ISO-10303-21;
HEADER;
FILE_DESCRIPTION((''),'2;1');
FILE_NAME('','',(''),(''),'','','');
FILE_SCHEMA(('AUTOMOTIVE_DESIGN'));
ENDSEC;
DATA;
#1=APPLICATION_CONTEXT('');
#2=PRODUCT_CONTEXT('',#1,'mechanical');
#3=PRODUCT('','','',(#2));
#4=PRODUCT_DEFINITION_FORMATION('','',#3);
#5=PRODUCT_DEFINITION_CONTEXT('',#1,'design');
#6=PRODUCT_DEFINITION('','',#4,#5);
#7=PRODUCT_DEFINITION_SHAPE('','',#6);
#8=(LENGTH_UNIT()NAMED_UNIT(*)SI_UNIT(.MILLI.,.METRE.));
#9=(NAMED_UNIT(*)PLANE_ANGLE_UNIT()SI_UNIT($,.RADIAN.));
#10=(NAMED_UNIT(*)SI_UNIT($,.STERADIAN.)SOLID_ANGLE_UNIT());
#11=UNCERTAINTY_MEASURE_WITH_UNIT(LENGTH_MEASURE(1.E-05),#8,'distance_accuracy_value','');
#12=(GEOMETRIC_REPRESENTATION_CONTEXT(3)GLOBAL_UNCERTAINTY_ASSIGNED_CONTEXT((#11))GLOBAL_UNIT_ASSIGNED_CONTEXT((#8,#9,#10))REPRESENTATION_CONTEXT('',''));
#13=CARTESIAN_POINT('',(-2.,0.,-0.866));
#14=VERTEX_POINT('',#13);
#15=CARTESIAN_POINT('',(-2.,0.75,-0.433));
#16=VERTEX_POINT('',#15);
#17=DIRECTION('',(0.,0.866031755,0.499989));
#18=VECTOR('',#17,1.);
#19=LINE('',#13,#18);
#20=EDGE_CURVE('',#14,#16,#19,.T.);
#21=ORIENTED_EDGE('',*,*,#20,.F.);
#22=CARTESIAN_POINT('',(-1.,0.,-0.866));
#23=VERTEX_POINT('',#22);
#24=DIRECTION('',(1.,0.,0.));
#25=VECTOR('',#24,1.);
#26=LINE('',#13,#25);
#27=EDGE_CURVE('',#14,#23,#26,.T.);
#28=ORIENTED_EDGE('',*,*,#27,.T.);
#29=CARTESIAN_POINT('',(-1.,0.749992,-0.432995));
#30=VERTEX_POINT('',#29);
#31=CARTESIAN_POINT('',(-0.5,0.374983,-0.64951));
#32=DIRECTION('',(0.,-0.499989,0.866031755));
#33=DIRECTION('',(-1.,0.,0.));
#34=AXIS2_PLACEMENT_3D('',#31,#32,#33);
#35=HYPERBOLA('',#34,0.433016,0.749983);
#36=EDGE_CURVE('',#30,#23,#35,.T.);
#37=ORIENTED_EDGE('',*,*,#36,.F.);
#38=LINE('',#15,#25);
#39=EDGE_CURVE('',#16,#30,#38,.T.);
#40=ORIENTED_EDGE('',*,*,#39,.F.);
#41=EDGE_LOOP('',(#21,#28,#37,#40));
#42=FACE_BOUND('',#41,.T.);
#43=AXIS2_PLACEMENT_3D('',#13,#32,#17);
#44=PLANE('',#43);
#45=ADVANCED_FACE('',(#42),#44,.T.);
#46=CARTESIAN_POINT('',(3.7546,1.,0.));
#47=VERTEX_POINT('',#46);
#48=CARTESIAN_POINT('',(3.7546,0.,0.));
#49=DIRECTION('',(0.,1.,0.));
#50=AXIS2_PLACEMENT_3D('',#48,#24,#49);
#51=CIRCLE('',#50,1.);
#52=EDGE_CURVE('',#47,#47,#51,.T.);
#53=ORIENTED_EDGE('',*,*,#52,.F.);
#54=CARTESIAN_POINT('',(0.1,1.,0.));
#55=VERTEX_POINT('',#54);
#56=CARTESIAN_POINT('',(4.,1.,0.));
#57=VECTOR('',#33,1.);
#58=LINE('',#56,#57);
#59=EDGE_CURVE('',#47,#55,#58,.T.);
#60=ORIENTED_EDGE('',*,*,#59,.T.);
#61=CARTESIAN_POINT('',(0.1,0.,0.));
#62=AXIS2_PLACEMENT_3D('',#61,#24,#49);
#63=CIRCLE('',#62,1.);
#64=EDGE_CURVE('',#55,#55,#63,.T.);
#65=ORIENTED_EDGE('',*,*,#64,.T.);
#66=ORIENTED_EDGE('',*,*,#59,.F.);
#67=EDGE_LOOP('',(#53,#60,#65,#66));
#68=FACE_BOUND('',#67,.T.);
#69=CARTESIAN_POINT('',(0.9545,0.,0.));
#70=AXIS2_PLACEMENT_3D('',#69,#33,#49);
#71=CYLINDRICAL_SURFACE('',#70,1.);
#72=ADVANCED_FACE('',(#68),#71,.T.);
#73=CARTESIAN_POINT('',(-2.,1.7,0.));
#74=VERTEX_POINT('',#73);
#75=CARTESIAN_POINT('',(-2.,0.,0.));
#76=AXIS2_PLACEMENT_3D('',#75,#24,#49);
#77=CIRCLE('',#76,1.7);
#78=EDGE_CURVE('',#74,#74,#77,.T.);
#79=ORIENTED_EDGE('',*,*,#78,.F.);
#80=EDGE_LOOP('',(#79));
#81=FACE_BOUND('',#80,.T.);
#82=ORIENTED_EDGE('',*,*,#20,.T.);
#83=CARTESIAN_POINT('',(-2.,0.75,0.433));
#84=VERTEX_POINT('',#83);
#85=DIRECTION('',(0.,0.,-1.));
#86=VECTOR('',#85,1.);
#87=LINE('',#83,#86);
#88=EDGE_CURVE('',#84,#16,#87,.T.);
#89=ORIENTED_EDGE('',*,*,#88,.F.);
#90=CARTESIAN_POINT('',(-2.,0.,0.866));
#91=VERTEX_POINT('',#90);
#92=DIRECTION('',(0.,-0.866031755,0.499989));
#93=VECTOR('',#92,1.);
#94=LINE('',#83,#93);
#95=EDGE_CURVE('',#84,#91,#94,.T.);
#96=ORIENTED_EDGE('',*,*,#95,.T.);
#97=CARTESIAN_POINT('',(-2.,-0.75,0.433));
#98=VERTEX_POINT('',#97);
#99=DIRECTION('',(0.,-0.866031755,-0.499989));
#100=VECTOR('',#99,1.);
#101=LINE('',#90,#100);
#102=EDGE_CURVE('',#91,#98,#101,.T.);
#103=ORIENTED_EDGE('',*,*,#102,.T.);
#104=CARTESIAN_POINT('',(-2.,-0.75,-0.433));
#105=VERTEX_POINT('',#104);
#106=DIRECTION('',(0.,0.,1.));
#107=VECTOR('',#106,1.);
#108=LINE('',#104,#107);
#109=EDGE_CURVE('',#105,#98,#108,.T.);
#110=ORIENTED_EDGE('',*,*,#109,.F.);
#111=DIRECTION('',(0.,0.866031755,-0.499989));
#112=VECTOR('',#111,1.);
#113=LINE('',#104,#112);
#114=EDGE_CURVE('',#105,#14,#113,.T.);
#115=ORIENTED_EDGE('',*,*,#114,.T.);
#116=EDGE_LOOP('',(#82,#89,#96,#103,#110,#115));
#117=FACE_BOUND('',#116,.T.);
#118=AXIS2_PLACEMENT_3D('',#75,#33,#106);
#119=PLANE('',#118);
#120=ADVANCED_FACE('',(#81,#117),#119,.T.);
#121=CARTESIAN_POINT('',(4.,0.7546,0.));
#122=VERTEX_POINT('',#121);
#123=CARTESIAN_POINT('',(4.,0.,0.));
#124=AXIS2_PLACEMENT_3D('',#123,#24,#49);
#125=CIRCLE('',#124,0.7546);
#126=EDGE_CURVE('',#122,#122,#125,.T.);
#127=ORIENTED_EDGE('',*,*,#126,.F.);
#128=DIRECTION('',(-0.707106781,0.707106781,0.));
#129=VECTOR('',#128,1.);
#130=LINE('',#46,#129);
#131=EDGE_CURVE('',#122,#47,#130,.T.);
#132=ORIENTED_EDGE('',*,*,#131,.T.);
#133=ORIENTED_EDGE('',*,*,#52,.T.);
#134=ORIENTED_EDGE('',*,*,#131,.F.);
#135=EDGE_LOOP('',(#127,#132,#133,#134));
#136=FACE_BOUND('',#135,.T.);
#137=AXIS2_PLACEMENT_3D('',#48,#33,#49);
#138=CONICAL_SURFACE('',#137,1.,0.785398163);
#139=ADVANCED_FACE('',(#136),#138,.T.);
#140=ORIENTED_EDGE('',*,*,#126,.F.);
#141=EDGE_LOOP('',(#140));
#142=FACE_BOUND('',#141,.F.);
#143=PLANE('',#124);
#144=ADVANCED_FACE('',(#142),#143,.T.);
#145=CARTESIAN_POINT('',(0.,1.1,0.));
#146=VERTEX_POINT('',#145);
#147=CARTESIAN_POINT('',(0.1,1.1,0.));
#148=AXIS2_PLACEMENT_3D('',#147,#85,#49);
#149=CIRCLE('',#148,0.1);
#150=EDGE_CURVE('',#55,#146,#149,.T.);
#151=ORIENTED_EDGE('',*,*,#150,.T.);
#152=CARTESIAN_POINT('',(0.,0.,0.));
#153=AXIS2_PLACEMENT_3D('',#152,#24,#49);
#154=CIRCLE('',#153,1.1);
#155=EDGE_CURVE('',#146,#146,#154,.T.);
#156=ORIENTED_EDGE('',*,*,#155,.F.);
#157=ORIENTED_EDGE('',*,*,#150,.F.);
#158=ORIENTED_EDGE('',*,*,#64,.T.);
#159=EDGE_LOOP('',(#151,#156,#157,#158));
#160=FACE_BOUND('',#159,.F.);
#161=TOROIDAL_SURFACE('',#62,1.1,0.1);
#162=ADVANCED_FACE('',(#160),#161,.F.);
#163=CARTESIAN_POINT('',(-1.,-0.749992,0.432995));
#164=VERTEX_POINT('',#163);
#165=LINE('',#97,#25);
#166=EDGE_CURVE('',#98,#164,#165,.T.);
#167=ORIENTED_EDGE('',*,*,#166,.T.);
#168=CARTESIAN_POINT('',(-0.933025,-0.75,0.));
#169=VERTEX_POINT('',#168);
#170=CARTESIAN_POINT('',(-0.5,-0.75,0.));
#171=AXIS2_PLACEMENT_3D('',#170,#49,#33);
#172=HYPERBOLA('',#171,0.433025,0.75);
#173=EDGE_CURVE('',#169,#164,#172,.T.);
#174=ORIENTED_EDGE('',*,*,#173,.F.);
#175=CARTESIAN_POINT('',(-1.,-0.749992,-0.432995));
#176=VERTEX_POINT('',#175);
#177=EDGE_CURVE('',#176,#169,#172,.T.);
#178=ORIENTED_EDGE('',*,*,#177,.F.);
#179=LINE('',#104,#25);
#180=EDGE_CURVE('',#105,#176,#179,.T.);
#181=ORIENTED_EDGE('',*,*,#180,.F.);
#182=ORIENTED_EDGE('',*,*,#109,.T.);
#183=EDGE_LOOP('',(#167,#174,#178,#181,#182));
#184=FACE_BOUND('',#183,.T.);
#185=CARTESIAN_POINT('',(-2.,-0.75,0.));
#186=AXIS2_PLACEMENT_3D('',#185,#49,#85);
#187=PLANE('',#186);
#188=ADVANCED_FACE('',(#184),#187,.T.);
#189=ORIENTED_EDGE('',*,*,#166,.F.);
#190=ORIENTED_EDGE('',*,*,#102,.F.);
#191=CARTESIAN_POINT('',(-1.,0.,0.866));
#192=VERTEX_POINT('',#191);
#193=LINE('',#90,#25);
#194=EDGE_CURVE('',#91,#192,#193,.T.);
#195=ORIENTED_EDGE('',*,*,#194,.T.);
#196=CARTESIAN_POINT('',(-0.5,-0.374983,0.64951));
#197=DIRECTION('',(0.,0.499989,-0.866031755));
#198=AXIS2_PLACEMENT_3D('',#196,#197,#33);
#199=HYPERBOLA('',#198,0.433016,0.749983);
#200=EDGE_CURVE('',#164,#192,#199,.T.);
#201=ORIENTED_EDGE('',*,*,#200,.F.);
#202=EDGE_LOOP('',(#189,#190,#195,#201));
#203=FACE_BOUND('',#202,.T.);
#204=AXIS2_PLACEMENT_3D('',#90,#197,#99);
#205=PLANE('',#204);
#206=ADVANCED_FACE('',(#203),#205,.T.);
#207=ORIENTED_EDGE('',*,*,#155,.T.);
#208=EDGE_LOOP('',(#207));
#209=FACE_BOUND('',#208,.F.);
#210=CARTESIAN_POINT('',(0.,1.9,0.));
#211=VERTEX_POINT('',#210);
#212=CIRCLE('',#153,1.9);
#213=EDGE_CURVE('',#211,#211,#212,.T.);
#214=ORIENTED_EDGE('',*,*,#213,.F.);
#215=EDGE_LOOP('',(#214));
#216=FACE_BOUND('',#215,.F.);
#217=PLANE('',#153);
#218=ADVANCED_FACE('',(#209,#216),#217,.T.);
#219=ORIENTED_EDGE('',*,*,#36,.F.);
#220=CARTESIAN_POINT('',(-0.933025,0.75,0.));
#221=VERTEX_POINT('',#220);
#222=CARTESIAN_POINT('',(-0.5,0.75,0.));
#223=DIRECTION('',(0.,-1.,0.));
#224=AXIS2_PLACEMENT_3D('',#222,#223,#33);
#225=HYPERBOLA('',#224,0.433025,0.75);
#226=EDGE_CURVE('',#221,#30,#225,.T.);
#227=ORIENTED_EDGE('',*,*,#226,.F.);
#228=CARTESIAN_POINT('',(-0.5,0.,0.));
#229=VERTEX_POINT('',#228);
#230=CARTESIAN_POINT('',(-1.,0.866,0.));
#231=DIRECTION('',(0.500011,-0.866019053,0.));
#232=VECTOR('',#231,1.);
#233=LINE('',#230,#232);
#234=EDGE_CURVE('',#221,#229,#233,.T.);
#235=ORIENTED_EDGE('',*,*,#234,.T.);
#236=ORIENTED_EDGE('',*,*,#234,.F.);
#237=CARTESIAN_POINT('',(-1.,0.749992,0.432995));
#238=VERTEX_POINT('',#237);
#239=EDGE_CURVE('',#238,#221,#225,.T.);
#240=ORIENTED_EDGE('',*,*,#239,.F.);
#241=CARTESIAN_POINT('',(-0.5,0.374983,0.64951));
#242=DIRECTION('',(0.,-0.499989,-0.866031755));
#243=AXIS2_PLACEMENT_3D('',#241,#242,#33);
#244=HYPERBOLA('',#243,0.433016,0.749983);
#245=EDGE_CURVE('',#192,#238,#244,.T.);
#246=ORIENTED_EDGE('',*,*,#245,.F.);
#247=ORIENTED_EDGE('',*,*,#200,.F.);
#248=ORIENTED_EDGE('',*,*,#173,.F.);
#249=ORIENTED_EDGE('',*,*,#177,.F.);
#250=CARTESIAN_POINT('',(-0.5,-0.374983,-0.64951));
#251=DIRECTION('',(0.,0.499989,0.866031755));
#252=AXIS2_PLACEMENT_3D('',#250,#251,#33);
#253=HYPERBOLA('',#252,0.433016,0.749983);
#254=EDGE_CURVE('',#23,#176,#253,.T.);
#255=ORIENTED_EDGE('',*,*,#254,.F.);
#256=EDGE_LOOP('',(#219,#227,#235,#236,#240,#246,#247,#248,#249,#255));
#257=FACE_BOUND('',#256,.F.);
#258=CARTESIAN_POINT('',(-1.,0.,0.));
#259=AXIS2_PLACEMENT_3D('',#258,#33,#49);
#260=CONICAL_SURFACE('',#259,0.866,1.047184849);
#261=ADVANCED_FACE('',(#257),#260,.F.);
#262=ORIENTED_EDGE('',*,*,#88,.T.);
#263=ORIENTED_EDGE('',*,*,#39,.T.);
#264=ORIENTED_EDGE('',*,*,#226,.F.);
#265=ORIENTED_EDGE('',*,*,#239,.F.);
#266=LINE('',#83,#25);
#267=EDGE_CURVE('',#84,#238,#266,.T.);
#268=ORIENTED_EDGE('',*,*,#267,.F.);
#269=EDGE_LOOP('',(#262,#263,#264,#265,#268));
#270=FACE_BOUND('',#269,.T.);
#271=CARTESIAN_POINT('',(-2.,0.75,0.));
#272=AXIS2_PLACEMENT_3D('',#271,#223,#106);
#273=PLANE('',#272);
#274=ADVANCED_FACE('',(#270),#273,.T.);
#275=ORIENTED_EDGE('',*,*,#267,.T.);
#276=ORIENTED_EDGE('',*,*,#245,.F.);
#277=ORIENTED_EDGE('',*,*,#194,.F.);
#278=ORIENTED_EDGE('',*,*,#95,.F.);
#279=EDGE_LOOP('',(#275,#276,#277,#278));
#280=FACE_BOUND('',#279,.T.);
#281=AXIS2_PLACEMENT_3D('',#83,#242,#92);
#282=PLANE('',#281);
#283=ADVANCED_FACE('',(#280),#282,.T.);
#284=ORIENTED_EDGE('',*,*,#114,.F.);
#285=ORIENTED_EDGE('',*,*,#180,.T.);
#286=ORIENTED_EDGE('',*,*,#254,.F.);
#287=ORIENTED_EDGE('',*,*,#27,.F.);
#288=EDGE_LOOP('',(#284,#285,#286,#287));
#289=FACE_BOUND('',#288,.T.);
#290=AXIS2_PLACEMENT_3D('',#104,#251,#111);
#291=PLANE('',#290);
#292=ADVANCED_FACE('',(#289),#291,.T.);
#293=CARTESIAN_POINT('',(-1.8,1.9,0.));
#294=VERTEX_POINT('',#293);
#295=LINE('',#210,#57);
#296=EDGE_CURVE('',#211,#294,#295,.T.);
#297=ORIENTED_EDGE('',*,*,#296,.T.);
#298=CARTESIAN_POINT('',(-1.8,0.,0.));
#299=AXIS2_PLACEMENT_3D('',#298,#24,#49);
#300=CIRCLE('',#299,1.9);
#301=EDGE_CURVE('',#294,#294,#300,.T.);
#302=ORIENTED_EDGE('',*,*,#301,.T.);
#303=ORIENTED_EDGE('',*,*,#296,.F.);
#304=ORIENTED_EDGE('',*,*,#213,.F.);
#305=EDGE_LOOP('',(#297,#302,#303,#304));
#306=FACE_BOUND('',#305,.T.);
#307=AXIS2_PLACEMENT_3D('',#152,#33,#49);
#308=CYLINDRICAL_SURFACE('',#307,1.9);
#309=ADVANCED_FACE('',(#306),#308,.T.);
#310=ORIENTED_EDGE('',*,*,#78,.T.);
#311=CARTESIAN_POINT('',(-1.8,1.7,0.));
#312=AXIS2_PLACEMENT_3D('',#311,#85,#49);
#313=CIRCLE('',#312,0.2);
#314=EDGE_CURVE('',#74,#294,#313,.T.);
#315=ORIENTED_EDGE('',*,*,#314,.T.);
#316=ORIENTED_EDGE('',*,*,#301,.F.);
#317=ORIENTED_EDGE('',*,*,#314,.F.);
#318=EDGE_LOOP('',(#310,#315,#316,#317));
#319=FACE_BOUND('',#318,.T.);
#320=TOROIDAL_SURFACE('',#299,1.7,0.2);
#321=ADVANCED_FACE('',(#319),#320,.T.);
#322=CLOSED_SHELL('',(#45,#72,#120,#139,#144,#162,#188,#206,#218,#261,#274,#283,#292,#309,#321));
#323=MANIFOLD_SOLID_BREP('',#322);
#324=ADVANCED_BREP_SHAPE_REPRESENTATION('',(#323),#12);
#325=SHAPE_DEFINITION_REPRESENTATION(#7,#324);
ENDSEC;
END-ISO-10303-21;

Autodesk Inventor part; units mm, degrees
ref_plane "YZ Plane" through (0, 0, 0) normal (1, 0, 0) x (0, 1, 0)
ref_plane "XZ Plane" through (0, 0, 0) normal (0, 1, 0) x (-1, 0, 0)
sketch "Skizze1" plane through (0, 0, 0) normal (0, 0, 1) x (1, 0, 0)
  line L0 (-0.5, 0) -> (4, 0)
  line L1 (4, 0) -> (4, 1)
  line L2 (4, 1) -> (1.2, 1)
  line L3 (1.2, 1) -> (0.9545, 1)
  line L4 (0.9545, 1) -> (0, 1)
  line L5 (0, 1) -> (0, 1.9)
  line L6 (0, 1.9) -> (-2, 1.9)
  line L7 (-2, 1.9) -> (-2, 0.866)
  line L8 (-2, 0.866) -> (-1, 0.866)
  line L9 (-1, 0.866) -> (-0.5, 0)
  line L10 (-3.2, 0) -> (5.2, 0) projected
  line L11 (0, -0.38) -> (0, 2.28) projected
  line L12 (1.2, 1) -> (0, 1) construction
  dimension "d1" = 2.8
  dimension "d2" = 0.2455
  dimension "d3" = 2
  dimension "d4" = 1
  dimension "d5" = 60
  dimension "d6" = 2
  dimension "d7" = 2
  dimension "d8" = 1.7321
  dimension "d9" = 3.8
  dimension "d26" = 4
revolve "Körper" add sketch "Skizze1" angle 360 about axis through (-0.5, 0, 0) along (1, 0, 0)
sketch "Skizze2" plane through (-2, 0, 0) normal (-1, 0, 0) x (0, 0, 1)
  circle A0 centre (0, 0) radius 0.866 projected
  line L0 (0, -2.66) -> (0, 2.66) projected
  line L1 (-2.66, 0) -> (2.66, 0) projected
  line L2 (0.866, 0) -> (0.433, -0.75)
  line L3 (0.433, -0.75) -> (-0.433, -0.75)
  line L4 (-0.433, -0.75) -> (-0.866, 0)
  line L5 (-0.866, 0) -> (-0.433, 0.75)
  line L6 (-0.433, 0.75) -> (0.433, 0.75)
  line L7 (0.433, 0.75) -> (0.866, 0)
extrude "Loch" add sketch "Skizze2" against normal up to next contours L7 A0 | A0 L2 | L6 L0 A0 | A0 L0 L3 | L0 L6 A0 | A0 L3 L0 | L4 A0 | A0 L5
fillet "Rundung1" radius 0.2 1 edges at (-2, -1.9, 0)
thread "Gewinde" size "M2x0.4" class "6g" standard "ISO Metric profile" length 2.8
chamfer "Fase1" distance 0.2454 distance2 0.2454 1 edges at (4, -1, 0) measured on face at (4, -0.4588, -0.3309)
ref_plane "Work Plane1" through (29, 0, 0) normal (0, -1, 0) x (1, 0, 0)
fillet "Fillet2" radius 0.1 1 edges at (0, -1, 0)
equation "\"d1\" = GEL"
equation "\"d3\" = KOH"
equation "\"d4\" = INTI"
equation "\"d6\" = GD"
equation "\"d7\" = BDM"
equation "\"d8\" = 1.1547 * SW"
equation "\"d9\" = KOD"
equation "\"d26\" = NLG"
equation "\"d30\" = R"
equation "\"d17\" = RR"
equation "\"d13\" = GEL"
equation "\"d15\" = -0.5 * SPD + 0.5 * GD"
equation "\"d16\" = GUL"
equation "\"GD\" = 2"
equation "\"NLG\" = 4"
equation "\"GEL\" = 2.8"
equation "\"KOD\" = 3.8"
equation "\"KOH\" = 2"
equation "\"INTI\" = 1"
equation "\"GAL\" = 0.61345 * PTC"
equation "\"GUL\" = 0.61345 * PTC"
equation "\"BDM\" = NND"
equation "\"SW\" = 1.5"
equation "\"RR\" = 0.2"
equation "\"SPD\" = NND - 1.2269 * PTC"
equation "\"R\" = 0.1"
equation "\"TOA\" = 30deg"
equation "\"GD1\" = THREADDIA - 1.2269 * PTC"
equation "\"THREADDIA\" = 2"
equation "\"FAWI\" = 45deg"
equation "\"PTC\" = 0.4"
equation "\"NND\" = 2"
equation "\"E0\" = 1.155 * SW"
properties part number "ISO 4762  - M2 x 4" material "Edelstahl, 440C"
